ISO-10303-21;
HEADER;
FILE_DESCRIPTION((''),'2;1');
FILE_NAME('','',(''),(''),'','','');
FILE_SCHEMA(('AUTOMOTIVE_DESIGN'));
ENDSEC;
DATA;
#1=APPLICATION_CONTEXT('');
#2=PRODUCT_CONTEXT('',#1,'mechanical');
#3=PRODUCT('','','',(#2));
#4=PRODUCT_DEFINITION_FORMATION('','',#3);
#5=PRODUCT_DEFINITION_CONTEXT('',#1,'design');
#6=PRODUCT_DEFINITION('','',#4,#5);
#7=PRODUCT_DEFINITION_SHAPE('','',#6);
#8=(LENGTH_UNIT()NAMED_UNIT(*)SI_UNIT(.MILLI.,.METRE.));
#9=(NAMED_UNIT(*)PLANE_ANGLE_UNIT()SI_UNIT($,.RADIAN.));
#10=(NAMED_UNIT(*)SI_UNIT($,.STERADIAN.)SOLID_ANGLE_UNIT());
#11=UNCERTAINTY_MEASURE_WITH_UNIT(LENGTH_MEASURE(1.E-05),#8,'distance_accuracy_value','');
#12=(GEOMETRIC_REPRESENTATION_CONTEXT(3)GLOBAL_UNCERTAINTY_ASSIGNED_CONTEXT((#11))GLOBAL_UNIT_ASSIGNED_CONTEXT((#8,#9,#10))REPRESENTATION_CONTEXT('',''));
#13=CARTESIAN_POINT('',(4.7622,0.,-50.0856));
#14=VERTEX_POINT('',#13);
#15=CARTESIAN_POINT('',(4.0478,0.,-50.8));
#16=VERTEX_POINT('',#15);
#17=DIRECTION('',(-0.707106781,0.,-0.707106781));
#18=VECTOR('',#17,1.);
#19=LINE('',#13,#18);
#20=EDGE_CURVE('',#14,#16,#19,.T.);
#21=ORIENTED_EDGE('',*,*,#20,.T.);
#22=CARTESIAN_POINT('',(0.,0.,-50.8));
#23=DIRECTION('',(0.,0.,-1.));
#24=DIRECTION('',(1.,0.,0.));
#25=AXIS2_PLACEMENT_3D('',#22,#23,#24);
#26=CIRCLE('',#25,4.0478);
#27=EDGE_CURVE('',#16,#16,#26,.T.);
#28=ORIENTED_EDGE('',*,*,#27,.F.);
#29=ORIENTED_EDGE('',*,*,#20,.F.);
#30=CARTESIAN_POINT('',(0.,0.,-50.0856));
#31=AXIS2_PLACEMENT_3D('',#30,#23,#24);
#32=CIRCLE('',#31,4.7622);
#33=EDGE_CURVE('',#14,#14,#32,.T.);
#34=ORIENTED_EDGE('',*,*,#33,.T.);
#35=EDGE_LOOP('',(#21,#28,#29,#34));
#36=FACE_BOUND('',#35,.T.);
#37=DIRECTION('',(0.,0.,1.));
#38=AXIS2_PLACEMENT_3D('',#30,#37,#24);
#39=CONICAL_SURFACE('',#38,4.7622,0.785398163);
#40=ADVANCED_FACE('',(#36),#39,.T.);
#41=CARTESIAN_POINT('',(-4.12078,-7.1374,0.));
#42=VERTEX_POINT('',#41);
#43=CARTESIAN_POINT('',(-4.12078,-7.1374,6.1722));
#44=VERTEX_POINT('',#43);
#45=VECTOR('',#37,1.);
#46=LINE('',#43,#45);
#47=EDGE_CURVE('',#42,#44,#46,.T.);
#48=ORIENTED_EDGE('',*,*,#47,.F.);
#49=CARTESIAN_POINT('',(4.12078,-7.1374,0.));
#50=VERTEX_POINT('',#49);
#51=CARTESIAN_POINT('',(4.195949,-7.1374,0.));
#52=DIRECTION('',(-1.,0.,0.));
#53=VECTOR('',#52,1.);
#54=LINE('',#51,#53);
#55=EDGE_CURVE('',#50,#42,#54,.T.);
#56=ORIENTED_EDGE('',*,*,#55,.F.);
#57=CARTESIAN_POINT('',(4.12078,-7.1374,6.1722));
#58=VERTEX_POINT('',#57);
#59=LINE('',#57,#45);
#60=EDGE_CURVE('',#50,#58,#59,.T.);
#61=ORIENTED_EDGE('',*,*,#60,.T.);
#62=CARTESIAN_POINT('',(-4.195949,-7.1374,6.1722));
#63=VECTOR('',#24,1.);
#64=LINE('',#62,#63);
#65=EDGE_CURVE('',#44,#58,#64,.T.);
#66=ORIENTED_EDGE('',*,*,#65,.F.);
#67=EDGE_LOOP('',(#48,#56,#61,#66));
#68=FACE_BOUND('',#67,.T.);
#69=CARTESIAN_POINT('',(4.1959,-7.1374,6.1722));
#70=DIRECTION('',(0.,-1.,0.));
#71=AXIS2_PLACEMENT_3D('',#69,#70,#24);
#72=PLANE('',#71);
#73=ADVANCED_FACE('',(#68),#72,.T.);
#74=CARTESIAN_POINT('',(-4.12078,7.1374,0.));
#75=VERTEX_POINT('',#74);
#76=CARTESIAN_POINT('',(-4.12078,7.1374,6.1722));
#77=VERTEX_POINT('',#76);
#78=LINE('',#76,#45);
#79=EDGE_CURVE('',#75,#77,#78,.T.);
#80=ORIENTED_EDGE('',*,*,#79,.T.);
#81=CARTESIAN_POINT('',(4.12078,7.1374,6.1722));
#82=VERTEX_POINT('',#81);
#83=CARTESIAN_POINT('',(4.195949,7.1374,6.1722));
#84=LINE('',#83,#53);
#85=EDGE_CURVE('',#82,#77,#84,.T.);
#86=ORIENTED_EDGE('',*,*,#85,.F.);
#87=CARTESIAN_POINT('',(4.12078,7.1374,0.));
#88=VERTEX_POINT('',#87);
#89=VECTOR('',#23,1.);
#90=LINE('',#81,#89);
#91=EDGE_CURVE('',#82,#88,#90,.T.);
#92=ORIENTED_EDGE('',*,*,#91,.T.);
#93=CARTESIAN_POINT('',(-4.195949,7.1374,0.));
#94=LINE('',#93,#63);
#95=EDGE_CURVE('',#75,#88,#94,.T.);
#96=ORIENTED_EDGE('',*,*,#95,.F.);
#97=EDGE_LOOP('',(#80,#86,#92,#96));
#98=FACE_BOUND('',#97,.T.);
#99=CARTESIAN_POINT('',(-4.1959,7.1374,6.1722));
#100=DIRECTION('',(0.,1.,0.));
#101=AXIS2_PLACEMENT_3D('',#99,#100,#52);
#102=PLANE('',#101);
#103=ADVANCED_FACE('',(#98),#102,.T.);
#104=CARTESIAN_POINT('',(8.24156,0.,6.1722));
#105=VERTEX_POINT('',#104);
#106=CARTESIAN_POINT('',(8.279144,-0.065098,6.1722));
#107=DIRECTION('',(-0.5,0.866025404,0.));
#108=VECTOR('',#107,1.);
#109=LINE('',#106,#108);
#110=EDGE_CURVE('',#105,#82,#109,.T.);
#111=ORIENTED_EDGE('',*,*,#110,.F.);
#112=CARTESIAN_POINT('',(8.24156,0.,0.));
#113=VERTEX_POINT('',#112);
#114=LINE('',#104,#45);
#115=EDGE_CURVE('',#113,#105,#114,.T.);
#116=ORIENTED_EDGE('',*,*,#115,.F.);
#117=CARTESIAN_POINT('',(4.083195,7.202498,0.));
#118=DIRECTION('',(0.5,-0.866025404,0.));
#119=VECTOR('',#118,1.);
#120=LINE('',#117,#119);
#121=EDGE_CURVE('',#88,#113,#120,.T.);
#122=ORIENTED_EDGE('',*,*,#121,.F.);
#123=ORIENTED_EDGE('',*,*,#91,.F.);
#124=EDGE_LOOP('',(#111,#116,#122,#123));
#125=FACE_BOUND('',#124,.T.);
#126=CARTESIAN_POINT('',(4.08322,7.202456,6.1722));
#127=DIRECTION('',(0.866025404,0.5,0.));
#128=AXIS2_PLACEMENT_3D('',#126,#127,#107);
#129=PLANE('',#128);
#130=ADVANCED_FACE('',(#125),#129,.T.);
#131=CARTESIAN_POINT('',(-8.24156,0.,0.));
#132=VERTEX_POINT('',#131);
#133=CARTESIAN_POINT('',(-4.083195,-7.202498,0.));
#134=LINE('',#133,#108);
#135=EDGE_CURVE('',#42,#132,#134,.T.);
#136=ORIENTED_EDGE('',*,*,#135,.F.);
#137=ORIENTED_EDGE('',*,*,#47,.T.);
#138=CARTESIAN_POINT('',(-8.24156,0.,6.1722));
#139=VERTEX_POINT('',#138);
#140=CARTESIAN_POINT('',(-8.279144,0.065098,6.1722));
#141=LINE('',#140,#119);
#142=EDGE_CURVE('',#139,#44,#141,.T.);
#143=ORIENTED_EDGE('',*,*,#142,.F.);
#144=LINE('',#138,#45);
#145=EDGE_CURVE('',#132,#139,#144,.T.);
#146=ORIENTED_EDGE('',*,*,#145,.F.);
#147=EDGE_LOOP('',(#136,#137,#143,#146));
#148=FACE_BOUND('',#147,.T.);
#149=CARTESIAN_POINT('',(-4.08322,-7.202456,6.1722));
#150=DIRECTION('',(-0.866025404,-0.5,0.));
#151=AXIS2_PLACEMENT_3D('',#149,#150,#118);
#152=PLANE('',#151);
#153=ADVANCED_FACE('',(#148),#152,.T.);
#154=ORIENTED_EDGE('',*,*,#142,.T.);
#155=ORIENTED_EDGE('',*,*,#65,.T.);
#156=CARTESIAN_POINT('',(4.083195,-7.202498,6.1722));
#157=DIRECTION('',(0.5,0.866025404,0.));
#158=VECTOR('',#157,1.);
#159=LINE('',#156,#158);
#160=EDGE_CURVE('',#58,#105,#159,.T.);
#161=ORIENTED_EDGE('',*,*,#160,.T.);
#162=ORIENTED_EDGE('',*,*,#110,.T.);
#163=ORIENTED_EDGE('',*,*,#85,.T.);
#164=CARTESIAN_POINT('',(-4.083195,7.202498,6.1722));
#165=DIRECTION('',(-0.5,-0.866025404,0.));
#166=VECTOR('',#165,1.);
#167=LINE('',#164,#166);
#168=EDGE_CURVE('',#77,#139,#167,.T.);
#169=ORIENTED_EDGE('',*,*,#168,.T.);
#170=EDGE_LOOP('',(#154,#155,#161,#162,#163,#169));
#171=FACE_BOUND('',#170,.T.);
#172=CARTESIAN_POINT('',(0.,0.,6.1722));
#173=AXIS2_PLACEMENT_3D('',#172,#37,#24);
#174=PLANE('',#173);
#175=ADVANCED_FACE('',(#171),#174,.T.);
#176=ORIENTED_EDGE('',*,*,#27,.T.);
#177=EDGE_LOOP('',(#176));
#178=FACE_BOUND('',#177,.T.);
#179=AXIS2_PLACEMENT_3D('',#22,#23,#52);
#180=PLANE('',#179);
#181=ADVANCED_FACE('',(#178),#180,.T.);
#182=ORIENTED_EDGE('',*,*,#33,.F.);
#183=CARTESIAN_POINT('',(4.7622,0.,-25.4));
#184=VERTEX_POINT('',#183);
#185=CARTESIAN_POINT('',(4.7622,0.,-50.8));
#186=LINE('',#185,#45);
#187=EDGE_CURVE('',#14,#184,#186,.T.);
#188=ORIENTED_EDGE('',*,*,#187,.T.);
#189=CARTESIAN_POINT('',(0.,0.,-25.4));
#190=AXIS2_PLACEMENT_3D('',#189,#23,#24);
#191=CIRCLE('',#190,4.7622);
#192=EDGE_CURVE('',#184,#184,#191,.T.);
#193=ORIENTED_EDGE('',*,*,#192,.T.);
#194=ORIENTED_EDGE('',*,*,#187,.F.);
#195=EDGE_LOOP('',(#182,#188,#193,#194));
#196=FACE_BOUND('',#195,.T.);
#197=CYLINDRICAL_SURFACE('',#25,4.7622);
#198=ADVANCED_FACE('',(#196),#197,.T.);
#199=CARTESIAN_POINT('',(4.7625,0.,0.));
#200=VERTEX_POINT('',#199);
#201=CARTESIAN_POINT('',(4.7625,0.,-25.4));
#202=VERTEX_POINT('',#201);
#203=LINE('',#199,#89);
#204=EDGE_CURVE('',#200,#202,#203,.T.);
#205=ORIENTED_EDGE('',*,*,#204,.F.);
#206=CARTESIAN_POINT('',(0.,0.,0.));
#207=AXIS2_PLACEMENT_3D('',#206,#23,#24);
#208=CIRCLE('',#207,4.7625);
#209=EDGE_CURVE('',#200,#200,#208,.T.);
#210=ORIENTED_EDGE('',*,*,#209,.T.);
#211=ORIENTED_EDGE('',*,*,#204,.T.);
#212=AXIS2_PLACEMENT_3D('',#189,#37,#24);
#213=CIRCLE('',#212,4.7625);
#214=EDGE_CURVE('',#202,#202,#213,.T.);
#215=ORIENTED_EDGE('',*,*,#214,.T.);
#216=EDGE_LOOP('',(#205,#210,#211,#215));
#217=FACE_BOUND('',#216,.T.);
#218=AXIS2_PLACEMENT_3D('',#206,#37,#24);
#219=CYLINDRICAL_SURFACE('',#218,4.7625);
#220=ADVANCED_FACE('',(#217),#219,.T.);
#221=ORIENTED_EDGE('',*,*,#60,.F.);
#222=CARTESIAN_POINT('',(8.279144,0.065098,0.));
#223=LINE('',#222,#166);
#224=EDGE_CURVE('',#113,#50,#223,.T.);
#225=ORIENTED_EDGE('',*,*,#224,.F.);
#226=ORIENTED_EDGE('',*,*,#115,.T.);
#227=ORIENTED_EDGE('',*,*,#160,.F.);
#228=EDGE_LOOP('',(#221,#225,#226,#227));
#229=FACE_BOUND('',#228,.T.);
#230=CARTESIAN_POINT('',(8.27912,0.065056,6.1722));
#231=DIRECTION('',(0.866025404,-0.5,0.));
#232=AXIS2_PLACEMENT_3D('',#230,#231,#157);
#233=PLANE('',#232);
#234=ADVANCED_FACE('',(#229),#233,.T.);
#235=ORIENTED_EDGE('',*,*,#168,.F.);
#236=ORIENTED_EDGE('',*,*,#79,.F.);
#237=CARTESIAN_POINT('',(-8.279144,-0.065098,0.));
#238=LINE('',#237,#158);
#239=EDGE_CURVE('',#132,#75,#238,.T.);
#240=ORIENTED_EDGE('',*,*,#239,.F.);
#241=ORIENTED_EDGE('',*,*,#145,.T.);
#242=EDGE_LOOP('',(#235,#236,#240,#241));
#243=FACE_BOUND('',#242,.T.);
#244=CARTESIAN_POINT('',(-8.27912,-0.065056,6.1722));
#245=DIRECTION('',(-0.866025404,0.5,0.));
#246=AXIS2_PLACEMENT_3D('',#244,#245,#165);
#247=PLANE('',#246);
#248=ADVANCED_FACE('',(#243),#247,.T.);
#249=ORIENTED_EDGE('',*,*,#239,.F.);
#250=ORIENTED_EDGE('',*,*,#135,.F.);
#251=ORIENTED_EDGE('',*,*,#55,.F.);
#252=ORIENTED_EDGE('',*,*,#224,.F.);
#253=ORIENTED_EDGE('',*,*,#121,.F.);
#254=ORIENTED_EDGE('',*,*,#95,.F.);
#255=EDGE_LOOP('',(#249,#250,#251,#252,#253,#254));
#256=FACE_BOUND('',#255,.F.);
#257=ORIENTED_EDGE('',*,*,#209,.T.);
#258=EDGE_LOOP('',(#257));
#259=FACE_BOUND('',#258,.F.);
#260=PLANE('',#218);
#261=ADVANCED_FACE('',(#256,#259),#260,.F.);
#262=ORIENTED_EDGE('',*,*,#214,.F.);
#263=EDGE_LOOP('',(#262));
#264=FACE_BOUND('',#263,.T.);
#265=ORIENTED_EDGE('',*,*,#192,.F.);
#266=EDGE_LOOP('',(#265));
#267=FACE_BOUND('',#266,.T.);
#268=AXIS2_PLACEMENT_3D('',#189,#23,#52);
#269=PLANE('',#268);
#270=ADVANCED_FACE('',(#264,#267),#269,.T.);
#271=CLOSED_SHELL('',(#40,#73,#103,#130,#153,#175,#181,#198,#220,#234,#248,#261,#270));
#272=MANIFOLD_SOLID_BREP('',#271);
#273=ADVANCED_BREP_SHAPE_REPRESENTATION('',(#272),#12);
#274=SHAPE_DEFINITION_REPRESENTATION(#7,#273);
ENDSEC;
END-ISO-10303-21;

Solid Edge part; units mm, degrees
sketch "Sketch1" plane through (0, 0, 0) normal (0, 0, 1) x (1, 0, 0)
  circle A0 centre (0, 0) radius 8.2794
  dimension "D1" = 16.5588
extrude "Protrusion1" add sketch "Sketch1" along normal blind 6.1722
sketch "Sketch2" plane through (0, 0, 0) normal (0, 0, -1) x (1, 0, 0)
  circle A0 centre (0, 0) radius 4.7625
extrude "Protrusion2" add sketch "Sketch2" along normal blind 50.8
sketch "Sketch3" plane through (0, 0, -50.8) normal (0, 0, -1) x (1, 0, 0)
  circle A0 centre (0, 0) radius 4.7622
extrude "Cutout1" cut sketch "Sketch3" against normal blind 25.4 flip side to cut
chamfer "Chamfer_1" distance 0.7144 angle 45 1 edges at (-4.7622, 0, -50.8)
sketch "Sketch4" plane through (0, 0, 6.1722) normal (0, 0, 1) x (1, 0, 0)
  line L0 (-4.1959, 7.1374) -> (4.1959, 7.1374)
  dimension "D1" = 14.2748
extrude "Cutout2" cut sketch "Sketch4" against normal up to next material side at (0, 7.1874, 6.1722)
pattern_circular "Pattern1" count 6 over 360 about axis through (0, 0, 6.1722) along (0, 0, 1) of "Cutout2"
properties part number "24107034"
